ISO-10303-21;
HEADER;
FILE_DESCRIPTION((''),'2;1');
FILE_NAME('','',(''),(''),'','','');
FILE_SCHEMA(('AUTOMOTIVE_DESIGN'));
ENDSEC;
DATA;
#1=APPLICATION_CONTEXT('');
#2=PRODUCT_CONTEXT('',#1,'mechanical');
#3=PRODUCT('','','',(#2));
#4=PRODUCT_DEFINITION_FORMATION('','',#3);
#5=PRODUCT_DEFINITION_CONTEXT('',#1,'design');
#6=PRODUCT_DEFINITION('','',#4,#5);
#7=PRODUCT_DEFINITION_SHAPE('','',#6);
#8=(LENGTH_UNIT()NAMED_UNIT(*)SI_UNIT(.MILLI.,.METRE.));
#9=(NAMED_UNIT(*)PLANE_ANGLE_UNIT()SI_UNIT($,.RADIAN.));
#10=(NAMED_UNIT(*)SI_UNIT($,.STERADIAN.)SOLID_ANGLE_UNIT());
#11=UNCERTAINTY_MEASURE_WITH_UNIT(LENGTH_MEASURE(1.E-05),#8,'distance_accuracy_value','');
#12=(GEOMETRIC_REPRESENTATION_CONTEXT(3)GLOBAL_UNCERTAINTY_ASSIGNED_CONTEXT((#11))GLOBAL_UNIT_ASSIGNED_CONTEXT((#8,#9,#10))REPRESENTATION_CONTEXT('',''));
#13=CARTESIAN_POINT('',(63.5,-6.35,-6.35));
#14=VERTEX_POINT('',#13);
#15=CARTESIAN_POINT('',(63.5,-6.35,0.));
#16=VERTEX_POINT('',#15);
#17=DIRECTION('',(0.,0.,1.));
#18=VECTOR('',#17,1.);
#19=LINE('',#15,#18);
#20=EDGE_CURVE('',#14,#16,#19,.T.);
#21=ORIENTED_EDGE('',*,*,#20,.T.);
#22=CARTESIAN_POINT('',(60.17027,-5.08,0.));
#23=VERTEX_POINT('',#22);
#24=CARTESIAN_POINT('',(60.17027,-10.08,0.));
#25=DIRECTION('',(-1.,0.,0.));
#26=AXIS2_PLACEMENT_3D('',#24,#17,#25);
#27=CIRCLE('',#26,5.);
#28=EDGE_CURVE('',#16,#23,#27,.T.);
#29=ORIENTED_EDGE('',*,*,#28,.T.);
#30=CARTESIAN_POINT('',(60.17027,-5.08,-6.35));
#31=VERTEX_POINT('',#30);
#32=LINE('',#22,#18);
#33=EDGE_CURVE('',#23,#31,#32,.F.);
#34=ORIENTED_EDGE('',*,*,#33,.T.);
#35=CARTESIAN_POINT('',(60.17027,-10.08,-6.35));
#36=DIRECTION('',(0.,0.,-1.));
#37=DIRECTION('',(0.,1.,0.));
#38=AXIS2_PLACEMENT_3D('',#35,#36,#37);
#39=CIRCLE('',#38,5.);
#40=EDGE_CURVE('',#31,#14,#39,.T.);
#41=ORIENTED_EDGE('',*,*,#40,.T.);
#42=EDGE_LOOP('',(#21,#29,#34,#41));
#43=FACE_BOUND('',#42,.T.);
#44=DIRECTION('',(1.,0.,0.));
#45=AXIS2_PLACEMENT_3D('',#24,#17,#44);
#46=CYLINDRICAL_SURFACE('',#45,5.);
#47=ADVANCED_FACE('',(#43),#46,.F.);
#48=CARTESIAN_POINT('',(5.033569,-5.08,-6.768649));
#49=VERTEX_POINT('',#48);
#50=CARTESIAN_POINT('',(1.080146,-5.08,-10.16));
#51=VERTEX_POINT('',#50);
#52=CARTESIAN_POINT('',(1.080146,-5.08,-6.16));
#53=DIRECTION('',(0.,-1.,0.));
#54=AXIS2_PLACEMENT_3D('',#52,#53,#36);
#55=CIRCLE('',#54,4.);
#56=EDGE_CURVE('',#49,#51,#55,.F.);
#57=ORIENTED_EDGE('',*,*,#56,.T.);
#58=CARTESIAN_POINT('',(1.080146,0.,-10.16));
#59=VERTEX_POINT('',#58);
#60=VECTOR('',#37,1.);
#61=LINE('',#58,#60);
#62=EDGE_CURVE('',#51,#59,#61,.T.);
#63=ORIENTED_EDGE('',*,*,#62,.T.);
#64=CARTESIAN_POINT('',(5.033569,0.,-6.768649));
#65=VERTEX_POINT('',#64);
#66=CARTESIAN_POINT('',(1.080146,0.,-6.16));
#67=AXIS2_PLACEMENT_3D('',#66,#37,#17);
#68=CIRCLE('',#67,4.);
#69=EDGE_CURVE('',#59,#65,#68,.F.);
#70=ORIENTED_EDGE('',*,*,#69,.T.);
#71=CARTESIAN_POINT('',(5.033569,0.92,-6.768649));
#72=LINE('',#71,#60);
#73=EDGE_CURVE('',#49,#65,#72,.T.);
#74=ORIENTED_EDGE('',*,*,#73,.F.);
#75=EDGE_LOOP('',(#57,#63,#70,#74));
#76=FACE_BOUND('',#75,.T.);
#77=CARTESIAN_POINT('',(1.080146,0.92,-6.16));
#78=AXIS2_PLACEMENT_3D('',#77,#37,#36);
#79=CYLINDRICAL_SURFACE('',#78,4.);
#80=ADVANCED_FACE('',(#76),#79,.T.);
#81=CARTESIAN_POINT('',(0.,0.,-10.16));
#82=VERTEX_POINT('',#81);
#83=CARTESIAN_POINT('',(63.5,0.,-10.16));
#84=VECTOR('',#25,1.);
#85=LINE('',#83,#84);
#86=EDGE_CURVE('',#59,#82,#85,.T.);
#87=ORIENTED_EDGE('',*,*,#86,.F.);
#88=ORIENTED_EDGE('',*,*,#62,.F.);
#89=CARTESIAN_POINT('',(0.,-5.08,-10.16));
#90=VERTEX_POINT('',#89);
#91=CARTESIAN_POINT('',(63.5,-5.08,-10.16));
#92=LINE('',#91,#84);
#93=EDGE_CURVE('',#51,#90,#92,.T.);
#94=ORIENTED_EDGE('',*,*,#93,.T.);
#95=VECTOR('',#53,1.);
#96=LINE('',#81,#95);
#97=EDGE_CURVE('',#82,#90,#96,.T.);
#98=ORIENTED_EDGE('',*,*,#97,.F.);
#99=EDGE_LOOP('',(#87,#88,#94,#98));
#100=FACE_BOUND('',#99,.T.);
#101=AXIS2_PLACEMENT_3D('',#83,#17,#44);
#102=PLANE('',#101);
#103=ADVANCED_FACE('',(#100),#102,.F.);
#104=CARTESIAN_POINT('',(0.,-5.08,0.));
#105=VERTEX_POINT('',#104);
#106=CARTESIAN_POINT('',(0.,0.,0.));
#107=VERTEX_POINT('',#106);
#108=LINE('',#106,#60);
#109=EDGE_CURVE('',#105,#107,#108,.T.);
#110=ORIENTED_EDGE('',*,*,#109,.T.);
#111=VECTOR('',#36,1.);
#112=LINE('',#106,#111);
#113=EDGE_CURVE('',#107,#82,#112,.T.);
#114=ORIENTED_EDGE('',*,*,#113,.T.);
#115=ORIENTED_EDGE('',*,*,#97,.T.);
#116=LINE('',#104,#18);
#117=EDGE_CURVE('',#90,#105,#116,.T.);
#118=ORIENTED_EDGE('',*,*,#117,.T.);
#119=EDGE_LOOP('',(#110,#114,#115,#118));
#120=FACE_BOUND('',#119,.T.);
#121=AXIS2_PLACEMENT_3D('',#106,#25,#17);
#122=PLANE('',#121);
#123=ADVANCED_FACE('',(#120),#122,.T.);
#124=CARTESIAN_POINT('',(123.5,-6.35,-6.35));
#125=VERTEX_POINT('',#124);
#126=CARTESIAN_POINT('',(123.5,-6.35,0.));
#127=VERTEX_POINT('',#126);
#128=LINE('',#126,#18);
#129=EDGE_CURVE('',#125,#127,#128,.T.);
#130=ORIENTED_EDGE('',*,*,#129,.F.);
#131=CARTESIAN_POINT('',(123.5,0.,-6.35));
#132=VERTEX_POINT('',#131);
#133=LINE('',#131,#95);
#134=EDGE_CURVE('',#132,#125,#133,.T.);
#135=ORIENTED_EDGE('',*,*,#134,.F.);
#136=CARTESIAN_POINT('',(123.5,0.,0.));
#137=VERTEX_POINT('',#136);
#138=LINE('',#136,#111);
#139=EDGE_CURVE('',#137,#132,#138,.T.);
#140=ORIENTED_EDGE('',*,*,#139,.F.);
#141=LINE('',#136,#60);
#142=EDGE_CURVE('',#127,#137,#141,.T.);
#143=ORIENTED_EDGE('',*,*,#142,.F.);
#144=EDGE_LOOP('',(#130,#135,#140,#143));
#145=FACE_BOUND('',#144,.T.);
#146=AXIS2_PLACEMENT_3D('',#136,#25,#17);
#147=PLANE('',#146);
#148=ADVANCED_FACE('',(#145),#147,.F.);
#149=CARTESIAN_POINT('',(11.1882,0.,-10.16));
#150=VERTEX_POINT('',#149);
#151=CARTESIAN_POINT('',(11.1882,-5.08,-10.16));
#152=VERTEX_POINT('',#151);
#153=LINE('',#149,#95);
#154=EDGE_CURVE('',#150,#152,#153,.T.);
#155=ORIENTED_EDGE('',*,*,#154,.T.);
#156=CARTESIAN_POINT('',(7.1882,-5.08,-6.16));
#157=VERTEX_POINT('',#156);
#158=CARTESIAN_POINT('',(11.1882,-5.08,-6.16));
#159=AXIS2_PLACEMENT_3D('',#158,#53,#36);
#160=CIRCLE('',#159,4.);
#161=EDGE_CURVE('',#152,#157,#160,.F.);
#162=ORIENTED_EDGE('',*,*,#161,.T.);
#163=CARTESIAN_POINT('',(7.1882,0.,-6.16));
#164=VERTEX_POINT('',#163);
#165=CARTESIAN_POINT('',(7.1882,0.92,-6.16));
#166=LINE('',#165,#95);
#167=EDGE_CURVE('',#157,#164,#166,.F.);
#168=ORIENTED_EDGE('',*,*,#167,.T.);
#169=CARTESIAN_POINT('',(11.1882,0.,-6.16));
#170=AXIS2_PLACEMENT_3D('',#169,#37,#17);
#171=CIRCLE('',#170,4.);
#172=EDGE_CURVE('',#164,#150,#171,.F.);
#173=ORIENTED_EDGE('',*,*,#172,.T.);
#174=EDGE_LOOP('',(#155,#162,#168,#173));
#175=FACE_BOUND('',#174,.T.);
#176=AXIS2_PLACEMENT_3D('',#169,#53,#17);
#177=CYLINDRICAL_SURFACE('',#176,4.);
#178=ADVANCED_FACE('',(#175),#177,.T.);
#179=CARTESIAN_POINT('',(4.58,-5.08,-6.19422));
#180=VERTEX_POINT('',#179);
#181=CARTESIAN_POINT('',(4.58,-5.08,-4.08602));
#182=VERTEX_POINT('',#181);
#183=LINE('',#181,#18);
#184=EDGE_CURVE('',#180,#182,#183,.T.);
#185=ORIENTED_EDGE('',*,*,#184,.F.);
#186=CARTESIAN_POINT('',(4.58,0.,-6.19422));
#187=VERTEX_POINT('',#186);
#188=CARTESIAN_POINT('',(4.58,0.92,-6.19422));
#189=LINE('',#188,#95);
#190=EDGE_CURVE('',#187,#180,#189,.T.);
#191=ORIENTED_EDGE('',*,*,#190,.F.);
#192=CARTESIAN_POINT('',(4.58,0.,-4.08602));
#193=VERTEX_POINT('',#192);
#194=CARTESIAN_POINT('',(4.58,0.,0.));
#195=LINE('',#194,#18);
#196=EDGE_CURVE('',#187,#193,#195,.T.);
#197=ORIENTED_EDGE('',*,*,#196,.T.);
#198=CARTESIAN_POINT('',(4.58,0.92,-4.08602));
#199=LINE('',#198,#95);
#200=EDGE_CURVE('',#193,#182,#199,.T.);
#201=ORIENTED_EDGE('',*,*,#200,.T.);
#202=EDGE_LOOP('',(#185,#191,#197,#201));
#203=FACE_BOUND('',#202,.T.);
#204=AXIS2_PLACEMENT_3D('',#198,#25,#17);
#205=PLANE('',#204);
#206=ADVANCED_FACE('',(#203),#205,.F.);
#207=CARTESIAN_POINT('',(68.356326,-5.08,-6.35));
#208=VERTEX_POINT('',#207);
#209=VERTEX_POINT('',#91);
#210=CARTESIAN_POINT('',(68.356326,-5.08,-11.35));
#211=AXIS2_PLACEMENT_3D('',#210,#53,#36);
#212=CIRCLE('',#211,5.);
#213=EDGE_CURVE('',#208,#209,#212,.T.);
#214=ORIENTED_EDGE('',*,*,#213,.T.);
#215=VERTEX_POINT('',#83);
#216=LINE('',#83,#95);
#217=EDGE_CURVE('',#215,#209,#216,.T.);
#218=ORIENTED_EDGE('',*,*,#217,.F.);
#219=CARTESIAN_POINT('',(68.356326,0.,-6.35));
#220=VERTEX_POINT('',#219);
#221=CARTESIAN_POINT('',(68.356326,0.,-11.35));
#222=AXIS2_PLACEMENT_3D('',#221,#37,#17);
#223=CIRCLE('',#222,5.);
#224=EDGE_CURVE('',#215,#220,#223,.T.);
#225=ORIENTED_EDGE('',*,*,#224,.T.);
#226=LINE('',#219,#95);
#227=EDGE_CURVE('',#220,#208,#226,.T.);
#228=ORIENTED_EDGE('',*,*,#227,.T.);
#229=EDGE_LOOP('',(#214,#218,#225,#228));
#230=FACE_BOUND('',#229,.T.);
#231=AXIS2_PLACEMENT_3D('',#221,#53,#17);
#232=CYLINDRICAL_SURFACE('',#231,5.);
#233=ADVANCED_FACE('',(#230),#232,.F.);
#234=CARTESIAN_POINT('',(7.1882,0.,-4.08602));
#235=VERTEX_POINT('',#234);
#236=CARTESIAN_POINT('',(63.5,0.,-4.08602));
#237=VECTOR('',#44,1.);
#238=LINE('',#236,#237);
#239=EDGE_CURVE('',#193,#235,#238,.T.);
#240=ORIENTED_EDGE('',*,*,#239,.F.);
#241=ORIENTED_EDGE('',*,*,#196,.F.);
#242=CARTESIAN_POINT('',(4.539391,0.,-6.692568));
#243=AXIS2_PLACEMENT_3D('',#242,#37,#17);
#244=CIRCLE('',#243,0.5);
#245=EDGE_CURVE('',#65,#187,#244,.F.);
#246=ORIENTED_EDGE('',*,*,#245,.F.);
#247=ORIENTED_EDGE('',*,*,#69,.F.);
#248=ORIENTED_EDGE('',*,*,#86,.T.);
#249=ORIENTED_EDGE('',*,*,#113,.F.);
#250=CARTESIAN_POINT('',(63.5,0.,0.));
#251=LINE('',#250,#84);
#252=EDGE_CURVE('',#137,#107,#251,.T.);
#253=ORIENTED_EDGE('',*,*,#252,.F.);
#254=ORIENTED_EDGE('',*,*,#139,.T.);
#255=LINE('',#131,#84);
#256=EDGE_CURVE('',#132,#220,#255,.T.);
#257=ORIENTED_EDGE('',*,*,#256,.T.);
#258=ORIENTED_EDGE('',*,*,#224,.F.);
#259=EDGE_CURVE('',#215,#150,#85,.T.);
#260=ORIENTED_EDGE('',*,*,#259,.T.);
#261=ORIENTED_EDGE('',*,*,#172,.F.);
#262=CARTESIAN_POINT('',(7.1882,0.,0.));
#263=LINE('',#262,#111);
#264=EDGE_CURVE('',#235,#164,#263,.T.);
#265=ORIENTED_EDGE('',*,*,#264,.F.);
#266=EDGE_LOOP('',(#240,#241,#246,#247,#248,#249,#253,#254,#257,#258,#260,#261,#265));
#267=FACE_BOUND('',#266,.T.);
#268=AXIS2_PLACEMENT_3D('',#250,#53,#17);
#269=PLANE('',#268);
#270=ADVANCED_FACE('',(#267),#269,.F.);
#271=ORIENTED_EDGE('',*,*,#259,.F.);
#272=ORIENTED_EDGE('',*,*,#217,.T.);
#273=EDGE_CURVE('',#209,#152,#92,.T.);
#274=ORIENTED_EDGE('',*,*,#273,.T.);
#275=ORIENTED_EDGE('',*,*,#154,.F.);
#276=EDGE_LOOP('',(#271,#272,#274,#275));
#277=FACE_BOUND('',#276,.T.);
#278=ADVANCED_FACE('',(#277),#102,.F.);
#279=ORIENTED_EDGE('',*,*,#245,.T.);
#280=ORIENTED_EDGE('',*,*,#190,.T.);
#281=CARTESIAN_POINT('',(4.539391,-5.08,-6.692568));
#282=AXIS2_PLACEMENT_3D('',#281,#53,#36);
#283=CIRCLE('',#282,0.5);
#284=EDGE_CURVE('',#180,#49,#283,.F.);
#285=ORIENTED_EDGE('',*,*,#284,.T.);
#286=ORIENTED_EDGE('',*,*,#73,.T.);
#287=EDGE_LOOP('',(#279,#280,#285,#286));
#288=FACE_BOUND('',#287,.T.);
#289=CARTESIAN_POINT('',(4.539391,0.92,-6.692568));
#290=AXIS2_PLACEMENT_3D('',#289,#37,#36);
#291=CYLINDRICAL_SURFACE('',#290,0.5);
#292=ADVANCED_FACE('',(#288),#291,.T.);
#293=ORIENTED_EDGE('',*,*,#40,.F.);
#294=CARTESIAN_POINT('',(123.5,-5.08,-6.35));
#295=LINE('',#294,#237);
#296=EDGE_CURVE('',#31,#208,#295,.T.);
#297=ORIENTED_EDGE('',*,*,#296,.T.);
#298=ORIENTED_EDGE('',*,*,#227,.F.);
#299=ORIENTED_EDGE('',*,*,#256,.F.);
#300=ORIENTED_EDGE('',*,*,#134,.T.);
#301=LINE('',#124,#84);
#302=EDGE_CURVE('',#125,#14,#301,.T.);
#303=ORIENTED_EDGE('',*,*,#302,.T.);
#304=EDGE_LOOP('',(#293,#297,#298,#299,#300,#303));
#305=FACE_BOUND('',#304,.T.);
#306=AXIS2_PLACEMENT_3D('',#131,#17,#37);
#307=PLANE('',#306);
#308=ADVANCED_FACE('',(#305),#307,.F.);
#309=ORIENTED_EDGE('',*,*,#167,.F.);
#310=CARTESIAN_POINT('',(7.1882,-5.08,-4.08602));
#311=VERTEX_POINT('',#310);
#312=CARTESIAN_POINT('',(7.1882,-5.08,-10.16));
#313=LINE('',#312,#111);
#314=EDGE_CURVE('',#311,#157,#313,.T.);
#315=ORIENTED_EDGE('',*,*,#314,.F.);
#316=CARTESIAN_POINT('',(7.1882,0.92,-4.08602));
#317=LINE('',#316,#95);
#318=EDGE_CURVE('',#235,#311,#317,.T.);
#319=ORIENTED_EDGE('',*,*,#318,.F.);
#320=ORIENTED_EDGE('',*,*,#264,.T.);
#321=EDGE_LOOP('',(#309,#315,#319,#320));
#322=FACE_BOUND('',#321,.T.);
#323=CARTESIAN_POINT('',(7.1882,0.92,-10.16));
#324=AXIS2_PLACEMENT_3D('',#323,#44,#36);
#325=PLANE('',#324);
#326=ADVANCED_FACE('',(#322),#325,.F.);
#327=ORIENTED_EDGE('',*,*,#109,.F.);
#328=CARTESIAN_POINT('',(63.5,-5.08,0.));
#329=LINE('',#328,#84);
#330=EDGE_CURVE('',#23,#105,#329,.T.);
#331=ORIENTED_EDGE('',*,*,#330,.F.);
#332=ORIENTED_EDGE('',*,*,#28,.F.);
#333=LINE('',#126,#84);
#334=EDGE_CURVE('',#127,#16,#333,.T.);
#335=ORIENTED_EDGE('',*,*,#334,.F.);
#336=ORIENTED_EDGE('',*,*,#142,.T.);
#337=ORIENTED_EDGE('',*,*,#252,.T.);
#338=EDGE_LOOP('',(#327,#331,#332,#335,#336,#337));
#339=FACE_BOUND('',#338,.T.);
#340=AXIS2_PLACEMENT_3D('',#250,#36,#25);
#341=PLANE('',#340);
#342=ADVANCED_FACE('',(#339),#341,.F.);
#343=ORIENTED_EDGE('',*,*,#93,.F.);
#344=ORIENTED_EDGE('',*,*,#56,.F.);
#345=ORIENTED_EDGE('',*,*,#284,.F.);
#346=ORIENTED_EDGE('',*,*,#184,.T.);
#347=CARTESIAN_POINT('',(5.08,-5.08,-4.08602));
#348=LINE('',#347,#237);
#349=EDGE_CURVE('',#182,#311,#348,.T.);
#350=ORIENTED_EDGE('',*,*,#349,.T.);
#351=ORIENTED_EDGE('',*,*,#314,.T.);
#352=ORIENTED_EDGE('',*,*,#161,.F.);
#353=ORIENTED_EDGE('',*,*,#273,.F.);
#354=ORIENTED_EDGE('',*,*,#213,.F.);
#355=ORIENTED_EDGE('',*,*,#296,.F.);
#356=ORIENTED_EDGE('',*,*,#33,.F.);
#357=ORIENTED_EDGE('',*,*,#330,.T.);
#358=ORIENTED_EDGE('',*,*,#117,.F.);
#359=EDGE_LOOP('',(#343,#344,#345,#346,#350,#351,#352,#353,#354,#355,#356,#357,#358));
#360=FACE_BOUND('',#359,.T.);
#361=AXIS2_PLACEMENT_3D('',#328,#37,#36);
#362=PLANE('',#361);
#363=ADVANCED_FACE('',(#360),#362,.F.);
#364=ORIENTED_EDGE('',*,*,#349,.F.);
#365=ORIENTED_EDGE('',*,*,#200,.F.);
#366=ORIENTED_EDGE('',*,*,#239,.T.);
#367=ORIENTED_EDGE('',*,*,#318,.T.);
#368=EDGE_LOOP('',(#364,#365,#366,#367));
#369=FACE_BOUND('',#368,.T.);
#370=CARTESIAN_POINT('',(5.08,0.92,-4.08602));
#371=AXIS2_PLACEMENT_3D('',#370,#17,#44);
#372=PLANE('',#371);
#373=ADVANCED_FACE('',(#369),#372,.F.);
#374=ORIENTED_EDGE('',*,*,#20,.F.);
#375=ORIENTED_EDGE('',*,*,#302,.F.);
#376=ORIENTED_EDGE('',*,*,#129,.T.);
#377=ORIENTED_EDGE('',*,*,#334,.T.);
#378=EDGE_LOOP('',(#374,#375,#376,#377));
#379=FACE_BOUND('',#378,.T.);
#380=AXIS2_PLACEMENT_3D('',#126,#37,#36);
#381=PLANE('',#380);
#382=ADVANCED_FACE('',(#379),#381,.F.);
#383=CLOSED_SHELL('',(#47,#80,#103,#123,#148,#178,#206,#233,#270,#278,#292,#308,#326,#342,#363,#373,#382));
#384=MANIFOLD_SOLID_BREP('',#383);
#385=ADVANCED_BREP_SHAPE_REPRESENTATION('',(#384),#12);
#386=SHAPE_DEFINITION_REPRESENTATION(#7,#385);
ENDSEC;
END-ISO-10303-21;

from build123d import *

# Parameters (mm, degrees)
SKETCH1_W           = 10.16
SKETCH1_H           = 5.08
BOSS_EXTRUDE1_DEPTH = 63.5
SKETCH2_W           = 2.1082
SKETCH2_H           = 6.073980388
CUT_EXTRUDE1_DEPTH  = 6
SKETCH3_W           = 0.5
SKETCH3_H           = 2.1082
CUT_EXTRUDE2_DEPTH  = 6
SKETCH4_W           = 6.35
SKETCH4_H           = 6.35
BOSS_EXTRUDE2_DEPTH = 60
FILLET3_R           = 4
FILLET4_R           = 0.5
FILLET6_R           = 5
FILLET10_R          = 5


with BuildPart() as part:
    # Sketch1 → Boss-Extrude1 (new body)
    with BuildSketch(Plane(origin=(0, 0, 0), x_dir=(0, 0, -1), z_dir=(1, 0, 0))):
        with Locations((5.08, 2.54)):
            Rectangle(SKETCH1_W, SKETCH1_H)
    extrude(amount=BOSS_EXTRUDE1_DEPTH)

    # Sketch2 → Cut-Extrude1 (cut)
    with BuildSketch(Plane(origin=(0, 5.08, 0), x_dir=(1, 0, 0), z_dir=(0, 1, 0))):
        with Locations((6.1341, 7.123009806)):
            Rectangle(SKETCH2_W, SKETCH2_H)
    extrude(amount=-CUT_EXTRUDE1_DEPTH, mode=Mode.SUBTRACT)

    # Sketch3 → Cut-Extrude2 (cut)
    with BuildSketch(Plane(origin=(0, 5.08, 0), x_dir=(1, 0, 0), z_dir=(0, 1, 0))):
        with Locations((4.83, 5.140119612)):
            Rectangle(SKETCH3_W, SKETCH3_H)
    extrude(amount=-CUT_EXTRUDE2_DEPTH, mode=Mode.SUBTRACT)

    # Sketch4 → Boss-Extrude2 (add)
    with BuildSketch(Plane(origin=(63.5, 0, 0), x_dir=(0, 0, -1), z_dir=(1, 0, 0))):
        with Locations((3.175, 3.175)):
            Rectangle(SKETCH4_W, SKETCH4_H)
    extrude(amount=BOSS_EXTRUDE2_DEPTH)

    # Fillet3
    # the kernel refuses this fillet: 4 mm, written as the material it takes off along each edge
    with BuildSketch(Plane(origin=(7.1882, 15.08, -10.16), x_dir=(0, 0, 1), z_dir=(0, -1, 0)), Plane(origin=(5.08, 15.08, -10.16), x_dir=(-1, 0, 0), z_dir=(0, -1, 0))) as fillet3_piece_1:
        with BuildLine():
            CenterArc((FILLET3_R, -FILLET3_R), FILLET3_R, 90, 90)
            Line((0, -FILLET3_R), (0, 0))
            Line((0, 0), (FILLET3_R, 0))
        make_face()
    extrude(amount=25.08, mode=Mode.SUBTRACT)

    # Fillet4
    # the kernel refuses this fillet: 0.5 mm, written as the material it takes off along each edge
    with BuildSketch(Plane(origin=(5.079853625, -1.440722871, -6.194219612), x_dir=(-0.08056618488507147, 0, -0.9967492612754044), z_dir=(0, 1, 0))) as fillet4_piece_1:
        with BuildLine():
            CenterArc((0.540271076, 0.498701011), FILLET4_R, 180.054119318, 94.076825667)
            Line((0.0402713, 0.498228731), (0.030271304, 0.498219285))
            ThreePointArc((0.030271304, 0.498219285), (0.010168157, 0.249920027), (-0.009967493, 0.000805662))
            Line((-0.009967493, 0.000805662), (-0.000720361, -0.00997402))
            ThreePointArc((-0.000720361, -0.00997402), (0.288144574, -0.020391911), (0.57700951, -0.00997402))
            Line((0.57700951, -0.00997402), (0.576289148, 0))
        make_face()
    extrude(amount=7.961445741, mode=Mode.SUBTRACT)

    # Fillet6
    # the kernel refuses this fillet: 5 mm, written as the material it adds along each edge
    with BuildSketch(Plane(origin=(63.5, 5.08, -6.35), x_dir=(-1, 0, 0), z_dir=(0, 0, 1))) as fillet6_piece_1:
        with BuildLine():
            CenterArc((3.329729719, -5), FILLET6_R, 90, 41.754936598)
            Line((0, -1.27), (0, 0))
            Line((0, 0), (3.329729719, 0))
        make_face()
    extrude(amount=6.35)

    # Fillet10
    # the kernel refuses this fillet: 5 mm, written as the material it adds along each edge
    with BuildSketch(Plane(origin=(63.5, 0, -6.35), x_dir=(1, 0, 0), z_dir=(0, 1, 0))) as fillet10_piece_1:
        with BuildLine():
            CenterArc((4.856325772, 5), FILLET10_R, 193.768528752, 76.231471248)
            Line((0, 3.81), (-0.097126515, 3.7862))
            ThreePointArc((-0.097126515, 3.7862), (-0.1, 1.905), (-0.1, 0))
            Line((-0.1, 0), (0, -0.1))
            Line((0, -0.1), (4.856325772, -0.1))
            Line((4.856325772, -0.1), (4.856325772, 0))
        make_face()
    extrude(amount=5.08)


with BuildPart() as body_2:
    # Mirror1: mirrored copy
    add(part.part.mirror(Plane(origin=(63.5, 0, 0), x_dir=(0, 0, 1), z_dir=(0, 1, 0))))


solid = body_2.part
